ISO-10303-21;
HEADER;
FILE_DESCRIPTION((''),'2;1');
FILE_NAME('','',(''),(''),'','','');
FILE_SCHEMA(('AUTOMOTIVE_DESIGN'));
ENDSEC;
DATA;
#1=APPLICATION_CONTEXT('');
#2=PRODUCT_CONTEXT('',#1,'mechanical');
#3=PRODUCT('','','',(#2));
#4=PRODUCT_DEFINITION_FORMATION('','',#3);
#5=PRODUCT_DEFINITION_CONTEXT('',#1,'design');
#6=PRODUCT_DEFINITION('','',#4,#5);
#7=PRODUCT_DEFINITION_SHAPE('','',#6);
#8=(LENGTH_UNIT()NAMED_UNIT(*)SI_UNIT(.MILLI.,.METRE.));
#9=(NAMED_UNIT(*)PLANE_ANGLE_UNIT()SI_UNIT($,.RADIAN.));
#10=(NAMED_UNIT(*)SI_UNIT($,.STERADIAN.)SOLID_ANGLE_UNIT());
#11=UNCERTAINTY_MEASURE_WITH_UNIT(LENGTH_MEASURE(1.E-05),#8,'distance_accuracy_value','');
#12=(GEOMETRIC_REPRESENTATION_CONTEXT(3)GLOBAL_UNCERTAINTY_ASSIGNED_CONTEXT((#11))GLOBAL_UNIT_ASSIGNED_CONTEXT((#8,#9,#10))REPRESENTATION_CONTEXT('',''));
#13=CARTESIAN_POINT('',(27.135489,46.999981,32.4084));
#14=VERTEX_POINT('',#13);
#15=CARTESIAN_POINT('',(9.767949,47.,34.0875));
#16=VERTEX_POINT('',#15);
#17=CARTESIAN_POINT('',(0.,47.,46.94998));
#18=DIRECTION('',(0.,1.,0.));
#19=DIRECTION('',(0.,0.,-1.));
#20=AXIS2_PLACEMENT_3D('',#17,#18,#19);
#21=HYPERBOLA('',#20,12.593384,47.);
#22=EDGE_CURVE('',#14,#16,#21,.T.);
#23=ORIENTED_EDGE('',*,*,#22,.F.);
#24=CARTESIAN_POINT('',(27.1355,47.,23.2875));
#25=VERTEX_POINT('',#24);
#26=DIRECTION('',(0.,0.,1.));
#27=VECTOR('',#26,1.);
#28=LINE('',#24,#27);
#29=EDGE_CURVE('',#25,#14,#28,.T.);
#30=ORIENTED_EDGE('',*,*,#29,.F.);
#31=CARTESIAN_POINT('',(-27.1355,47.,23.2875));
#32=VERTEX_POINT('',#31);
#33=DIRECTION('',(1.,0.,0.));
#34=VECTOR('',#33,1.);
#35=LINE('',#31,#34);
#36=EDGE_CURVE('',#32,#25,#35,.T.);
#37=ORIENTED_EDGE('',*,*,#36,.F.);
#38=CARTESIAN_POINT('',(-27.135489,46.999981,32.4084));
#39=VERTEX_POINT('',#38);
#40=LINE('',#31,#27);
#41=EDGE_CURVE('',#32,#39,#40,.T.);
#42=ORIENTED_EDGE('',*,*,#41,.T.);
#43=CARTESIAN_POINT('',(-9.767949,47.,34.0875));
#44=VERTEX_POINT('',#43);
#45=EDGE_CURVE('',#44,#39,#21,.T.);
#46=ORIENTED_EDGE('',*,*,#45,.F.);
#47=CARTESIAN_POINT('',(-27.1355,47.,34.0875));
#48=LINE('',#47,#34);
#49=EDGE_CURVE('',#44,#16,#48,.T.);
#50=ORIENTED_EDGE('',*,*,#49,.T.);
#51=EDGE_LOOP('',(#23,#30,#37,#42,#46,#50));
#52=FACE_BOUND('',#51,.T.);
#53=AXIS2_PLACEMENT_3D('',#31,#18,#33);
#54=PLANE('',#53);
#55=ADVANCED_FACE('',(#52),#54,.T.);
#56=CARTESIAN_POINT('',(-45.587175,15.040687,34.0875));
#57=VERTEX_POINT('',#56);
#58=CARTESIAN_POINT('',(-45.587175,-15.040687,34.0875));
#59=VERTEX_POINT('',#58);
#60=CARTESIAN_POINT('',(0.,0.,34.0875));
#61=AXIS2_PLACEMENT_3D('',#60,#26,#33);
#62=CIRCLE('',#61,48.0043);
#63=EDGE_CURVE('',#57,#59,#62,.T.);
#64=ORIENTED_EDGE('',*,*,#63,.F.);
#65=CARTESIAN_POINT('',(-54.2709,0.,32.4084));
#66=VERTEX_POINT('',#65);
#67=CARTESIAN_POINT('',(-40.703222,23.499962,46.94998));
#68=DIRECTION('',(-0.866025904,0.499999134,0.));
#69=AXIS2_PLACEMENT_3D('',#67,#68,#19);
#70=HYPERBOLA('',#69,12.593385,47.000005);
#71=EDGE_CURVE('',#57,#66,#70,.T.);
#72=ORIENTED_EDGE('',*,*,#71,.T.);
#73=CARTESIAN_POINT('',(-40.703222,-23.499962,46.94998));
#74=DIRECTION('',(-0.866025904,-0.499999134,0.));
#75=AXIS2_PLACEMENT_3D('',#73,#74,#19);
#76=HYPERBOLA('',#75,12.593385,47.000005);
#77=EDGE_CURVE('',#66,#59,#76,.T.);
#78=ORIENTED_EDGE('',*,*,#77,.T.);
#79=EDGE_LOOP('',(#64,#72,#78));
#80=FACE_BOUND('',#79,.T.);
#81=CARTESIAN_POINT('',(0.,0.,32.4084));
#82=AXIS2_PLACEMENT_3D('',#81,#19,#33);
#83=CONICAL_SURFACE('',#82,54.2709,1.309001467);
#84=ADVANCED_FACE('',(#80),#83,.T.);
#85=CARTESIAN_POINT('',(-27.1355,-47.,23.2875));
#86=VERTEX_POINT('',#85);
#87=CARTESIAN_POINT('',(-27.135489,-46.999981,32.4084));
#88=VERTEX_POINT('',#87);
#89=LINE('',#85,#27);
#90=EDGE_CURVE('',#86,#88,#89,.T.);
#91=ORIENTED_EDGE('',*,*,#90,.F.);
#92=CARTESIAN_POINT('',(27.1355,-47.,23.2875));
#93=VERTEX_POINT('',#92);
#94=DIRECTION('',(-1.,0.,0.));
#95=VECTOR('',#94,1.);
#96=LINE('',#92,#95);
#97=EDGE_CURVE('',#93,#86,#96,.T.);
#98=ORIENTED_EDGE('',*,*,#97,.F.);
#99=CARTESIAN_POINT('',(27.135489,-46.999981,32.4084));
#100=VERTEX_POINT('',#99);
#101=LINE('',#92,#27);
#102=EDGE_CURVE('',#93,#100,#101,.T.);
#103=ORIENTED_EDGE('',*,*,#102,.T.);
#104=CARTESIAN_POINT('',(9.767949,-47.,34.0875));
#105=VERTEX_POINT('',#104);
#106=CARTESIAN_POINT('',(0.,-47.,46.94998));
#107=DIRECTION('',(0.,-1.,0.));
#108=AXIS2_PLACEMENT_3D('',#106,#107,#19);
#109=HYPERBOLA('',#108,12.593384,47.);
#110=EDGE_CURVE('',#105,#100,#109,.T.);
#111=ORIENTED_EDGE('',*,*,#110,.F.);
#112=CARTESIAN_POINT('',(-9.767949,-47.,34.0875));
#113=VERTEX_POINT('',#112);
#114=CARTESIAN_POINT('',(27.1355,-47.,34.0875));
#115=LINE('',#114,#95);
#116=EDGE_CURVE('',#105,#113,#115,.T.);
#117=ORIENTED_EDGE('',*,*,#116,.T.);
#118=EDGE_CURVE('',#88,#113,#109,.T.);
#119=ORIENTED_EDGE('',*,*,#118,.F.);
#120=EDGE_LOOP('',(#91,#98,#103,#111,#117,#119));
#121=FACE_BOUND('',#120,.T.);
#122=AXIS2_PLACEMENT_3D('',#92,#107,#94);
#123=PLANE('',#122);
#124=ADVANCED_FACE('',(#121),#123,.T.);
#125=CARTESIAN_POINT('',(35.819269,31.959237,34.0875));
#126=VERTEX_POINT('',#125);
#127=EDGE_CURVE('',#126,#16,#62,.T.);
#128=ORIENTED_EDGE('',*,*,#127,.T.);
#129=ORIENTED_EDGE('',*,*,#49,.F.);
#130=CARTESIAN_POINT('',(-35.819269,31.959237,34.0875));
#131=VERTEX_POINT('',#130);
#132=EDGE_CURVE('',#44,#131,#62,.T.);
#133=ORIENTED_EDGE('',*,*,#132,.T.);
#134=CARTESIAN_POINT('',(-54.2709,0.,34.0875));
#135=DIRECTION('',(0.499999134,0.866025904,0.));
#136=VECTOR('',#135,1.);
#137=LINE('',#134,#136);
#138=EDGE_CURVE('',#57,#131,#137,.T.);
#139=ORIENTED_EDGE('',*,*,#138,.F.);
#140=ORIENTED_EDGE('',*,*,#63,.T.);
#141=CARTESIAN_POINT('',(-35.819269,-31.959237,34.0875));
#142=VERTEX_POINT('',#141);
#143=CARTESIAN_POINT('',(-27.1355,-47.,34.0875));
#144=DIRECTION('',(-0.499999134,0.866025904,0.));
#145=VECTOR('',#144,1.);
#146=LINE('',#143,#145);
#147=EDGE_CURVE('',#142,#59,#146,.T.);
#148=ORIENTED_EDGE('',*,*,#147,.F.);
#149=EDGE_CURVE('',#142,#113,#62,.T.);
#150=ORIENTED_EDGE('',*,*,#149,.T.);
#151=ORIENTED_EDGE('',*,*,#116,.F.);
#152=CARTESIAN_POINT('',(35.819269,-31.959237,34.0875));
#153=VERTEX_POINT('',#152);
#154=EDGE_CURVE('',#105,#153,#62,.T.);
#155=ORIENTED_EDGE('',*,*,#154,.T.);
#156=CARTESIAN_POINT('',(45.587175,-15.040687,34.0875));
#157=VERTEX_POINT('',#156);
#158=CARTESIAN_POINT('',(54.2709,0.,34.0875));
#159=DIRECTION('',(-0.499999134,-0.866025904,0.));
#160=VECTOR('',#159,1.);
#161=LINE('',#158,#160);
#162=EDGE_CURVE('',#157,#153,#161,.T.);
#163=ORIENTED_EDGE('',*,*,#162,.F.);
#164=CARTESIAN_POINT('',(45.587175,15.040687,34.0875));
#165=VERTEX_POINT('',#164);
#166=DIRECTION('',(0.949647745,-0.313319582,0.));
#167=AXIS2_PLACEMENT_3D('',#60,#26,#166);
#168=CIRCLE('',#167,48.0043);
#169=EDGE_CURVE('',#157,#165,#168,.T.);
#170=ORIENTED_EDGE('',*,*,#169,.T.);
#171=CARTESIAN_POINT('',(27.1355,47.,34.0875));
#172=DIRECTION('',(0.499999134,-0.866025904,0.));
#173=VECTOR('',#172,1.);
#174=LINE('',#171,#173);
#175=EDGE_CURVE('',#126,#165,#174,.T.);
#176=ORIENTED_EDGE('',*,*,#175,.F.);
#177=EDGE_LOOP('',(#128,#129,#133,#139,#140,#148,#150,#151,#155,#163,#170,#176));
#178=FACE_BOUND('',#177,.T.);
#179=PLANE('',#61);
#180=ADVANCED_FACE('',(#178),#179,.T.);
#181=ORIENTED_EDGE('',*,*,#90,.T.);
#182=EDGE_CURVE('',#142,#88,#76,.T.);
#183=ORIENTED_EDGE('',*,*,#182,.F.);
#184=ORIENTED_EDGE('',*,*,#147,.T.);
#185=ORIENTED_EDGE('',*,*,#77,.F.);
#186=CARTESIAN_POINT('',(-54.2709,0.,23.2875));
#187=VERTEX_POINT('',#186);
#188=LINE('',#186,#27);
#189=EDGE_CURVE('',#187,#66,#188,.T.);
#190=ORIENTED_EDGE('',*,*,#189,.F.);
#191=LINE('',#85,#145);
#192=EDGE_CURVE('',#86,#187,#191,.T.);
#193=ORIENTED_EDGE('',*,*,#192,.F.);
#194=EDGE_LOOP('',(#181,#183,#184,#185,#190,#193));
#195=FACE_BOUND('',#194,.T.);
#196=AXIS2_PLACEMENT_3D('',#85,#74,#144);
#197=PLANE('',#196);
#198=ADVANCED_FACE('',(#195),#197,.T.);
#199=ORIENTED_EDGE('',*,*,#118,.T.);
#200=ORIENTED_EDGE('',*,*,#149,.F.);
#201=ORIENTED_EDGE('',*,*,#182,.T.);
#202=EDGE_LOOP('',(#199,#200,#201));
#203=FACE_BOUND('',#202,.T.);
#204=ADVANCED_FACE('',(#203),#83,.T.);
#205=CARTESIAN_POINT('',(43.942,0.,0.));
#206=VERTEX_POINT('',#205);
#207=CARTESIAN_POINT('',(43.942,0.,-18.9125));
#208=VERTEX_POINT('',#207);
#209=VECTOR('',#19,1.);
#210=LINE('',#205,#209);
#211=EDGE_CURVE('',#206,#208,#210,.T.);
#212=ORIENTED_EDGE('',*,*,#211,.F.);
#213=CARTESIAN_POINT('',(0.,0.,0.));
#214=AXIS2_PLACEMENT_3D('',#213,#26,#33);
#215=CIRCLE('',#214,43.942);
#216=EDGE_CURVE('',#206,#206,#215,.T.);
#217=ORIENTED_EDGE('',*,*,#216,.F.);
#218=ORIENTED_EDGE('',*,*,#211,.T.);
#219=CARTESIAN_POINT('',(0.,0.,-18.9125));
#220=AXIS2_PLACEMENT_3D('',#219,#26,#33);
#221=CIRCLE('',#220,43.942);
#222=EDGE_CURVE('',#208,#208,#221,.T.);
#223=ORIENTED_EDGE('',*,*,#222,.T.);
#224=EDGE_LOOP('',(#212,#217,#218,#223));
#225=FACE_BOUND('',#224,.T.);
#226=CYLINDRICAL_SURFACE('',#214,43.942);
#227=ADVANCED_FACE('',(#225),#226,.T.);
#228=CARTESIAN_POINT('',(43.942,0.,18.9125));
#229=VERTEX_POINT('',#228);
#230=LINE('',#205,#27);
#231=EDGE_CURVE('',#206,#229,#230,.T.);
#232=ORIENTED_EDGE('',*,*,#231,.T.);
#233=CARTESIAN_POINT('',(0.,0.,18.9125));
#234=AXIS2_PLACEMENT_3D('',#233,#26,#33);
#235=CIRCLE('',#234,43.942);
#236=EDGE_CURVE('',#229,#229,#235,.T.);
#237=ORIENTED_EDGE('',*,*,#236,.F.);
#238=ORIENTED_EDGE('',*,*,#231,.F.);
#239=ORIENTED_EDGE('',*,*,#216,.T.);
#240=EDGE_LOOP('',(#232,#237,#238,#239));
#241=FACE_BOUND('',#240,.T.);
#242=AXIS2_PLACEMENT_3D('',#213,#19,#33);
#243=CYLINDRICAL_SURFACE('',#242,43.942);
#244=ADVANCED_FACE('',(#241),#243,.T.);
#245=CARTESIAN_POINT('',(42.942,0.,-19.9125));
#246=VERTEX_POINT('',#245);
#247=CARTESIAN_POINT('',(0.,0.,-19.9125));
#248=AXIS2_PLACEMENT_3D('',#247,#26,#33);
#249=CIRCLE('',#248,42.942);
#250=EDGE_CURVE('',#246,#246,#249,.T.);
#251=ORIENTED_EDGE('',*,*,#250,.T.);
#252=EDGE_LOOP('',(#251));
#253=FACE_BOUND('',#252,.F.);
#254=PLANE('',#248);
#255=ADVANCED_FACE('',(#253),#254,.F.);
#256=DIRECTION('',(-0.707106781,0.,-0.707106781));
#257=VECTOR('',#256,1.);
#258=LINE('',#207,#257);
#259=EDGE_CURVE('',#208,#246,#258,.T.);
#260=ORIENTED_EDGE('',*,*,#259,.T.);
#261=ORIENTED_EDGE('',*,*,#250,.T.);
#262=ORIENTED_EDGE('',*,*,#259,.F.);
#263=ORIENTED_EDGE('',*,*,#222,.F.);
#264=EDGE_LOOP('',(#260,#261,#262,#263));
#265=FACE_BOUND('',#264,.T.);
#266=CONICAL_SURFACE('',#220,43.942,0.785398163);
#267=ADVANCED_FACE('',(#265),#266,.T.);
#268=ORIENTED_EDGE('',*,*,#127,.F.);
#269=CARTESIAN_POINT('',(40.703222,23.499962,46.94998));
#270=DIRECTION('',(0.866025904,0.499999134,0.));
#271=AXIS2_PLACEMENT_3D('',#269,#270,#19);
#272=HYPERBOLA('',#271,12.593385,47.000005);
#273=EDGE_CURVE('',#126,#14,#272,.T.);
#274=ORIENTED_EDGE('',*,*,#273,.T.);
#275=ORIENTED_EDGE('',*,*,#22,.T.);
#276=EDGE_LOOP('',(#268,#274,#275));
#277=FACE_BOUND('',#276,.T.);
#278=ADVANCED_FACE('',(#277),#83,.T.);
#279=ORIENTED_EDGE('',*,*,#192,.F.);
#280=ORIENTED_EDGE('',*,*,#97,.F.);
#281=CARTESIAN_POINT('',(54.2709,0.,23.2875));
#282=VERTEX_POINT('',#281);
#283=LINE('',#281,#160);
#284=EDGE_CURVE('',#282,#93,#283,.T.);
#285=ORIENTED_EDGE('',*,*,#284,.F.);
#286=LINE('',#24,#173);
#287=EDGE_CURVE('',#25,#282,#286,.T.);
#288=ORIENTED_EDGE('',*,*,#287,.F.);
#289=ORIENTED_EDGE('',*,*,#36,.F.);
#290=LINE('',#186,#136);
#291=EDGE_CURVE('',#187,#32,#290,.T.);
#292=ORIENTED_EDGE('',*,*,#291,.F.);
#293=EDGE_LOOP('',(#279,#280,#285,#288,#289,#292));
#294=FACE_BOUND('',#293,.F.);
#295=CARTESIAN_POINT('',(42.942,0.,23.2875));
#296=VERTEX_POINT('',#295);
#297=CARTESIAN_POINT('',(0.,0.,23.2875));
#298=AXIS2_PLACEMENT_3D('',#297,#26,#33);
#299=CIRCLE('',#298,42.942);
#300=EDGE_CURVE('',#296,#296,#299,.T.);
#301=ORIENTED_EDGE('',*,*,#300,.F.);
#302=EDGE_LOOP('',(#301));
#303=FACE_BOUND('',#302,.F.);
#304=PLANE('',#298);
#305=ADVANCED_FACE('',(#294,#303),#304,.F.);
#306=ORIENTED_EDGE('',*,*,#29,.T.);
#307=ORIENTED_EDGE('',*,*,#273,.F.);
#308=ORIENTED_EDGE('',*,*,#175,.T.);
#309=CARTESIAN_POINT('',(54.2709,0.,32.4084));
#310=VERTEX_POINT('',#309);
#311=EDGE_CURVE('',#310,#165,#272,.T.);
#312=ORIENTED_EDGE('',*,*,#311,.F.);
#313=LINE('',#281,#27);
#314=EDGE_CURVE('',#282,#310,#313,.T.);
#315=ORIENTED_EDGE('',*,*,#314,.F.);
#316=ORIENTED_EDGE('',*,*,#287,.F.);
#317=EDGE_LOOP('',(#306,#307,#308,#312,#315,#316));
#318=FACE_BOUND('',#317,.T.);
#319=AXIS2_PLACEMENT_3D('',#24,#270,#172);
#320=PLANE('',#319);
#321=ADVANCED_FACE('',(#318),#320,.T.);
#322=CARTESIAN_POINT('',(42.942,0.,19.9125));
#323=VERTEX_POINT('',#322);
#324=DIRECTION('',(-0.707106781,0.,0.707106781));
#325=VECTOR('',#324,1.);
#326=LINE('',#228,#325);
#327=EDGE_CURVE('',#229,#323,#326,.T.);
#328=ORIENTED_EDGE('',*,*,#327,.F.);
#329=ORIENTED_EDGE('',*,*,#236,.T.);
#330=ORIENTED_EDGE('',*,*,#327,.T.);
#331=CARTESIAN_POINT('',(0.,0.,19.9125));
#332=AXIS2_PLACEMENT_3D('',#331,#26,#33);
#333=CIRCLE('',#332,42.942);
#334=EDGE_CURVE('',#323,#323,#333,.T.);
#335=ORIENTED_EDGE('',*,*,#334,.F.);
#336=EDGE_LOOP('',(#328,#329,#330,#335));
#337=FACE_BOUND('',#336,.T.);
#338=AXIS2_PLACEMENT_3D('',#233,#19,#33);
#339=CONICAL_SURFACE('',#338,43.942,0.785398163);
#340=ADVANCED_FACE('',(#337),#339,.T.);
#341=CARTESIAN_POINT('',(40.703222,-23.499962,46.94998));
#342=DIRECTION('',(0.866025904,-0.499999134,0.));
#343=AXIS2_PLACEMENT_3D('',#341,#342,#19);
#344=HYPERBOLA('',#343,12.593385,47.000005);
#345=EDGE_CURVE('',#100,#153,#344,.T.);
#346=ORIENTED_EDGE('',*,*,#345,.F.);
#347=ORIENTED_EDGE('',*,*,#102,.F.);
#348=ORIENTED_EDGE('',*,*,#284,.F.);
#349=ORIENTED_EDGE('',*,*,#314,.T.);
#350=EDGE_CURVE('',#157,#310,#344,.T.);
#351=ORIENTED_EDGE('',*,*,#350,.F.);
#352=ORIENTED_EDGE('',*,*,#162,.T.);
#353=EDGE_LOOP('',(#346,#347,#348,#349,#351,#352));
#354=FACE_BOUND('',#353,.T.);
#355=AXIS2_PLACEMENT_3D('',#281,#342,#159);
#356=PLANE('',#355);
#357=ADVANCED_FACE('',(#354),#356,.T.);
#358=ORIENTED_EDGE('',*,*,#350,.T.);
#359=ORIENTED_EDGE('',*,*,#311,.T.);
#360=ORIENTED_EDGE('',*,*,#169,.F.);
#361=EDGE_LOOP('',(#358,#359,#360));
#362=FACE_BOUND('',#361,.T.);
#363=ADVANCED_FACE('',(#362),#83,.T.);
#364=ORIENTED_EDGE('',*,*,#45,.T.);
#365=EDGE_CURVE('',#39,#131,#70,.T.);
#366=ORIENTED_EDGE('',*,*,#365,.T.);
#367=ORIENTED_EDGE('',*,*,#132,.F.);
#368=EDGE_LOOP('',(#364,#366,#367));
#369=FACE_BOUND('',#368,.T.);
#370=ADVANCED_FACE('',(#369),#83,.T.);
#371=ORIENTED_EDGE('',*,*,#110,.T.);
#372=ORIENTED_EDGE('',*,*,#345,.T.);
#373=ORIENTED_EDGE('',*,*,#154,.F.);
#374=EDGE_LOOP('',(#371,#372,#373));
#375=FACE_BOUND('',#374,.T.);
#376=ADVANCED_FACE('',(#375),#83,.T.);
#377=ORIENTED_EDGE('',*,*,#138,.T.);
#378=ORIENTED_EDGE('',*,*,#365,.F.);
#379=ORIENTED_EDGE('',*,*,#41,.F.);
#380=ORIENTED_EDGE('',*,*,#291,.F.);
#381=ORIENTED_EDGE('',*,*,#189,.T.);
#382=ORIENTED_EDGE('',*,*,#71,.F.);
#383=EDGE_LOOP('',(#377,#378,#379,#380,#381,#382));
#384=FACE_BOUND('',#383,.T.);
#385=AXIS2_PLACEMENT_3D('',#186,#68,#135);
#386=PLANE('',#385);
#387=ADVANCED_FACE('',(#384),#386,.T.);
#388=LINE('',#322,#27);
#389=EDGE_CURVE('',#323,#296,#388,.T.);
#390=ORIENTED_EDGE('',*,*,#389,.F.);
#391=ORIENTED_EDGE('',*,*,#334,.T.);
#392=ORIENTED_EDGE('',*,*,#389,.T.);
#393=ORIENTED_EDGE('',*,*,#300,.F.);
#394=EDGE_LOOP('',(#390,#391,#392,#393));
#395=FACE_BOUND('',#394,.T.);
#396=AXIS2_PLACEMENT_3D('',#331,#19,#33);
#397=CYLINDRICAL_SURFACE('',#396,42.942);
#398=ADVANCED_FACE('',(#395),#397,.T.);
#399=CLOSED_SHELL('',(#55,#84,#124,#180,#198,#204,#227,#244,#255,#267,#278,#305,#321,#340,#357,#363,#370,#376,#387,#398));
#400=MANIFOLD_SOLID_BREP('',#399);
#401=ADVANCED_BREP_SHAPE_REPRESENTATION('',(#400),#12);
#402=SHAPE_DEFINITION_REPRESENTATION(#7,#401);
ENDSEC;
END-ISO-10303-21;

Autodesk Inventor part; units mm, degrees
ref_plane "YZ Plane" through (0, 0, 0) normal (1, 0, 0) x (0, 1, 0)
ref_plane "XZ Plane" through (0, 0, 0) normal (0, 1, 0) x (-1, 0, 0)
ref_plane "XY Plane" through (0, 0, 0) normal (0, 0, 1) x (1, 0, 0)
sketch "Szkic7" plane through (0, 0, 0) normal (0, 0, 1) x (1, 0, 0)
  circle A0 centre (0, 0) radius 43.942
  dimension "d35" = 87.884
extrude "Wyciągnięcie proste2" add sketch "Szkic7" along normal mid plane 39.825
chamfer "Faza2" distance 1 angle 45 1 edges at (-43.942, 0, 19.9125)
sketch "Szkic9" plane through (0, 0, 19.9125) normal (0, 0, 1) x (1, 0, 0)
  circle A0 centre (0, 0) radius 42.942 projected
extrude "Wyciągnięcie proste3" add sketch "Szkic9" along normal blind 3.375
sketch "Szkic10" plane through (0, 0, 23.2875) normal (0, 0, 1) x (1, 0, 0)
  line L0 (-27.1355, 47) -> (27.1355, 47)
  line L1 (27.1355, 47) -> (54.2709, 0)
  line L2 (54.2709, 0) -> (27.1355, -47)
  line L3 (27.1355, -47) -> (-27.1355, -47)
  line L4 (-27.1355, -47) -> (-54.2709, 0)
  line L5 (-54.2709, 0) -> (-27.1355, 47)
  line L6 (0, 61.5188) -> (0, -61.5188) construction
  line L7 (-61.5188, 0) -> (61.5188, 0) construction
  point P0 (0, 0)
  point P1 (0, 0)
  point P2 (0, 47)
  dimension "d44" = 94
extrude "Wyciągnięcie proste4" add sketch "Szkic10" along normal blind 10.8
sketch "Szkic12" plane through (0, 0, 0) normal (0, 1, 0) x (-1, 0, 0)
  line L0 (0, -2.1463) -> (0, 12.8775) construction
  line L1 (-27.1355, 23.2875) -> (-27.1355, 34.0875) construction
  line L2 (-54.2709, 34.0875) -> (-27.1355, 34.0875) construction
  line L3 (-54.2709, 23.2875) -> (-54.2709, 34.0875) projected
  line L4 (-54.2709, 32.4084) -> (-48.0043, 34.0875)
  line L5 (-54.2709, 34.0875) -> (-27.1355, 34.0875) projected
  line L6 (-54.2709, 23.2875) -> (-27.1355, 23.2875) projected
  point P0 (0, 0)
  dimension "d50" = 15
  dimension "d51" = 6.2667
revolve "Obrót2" cut sketch "Szkic12" angle 360 about axis through (0, 0, -10) along (0, 0, 1)
thread "Gwint3" size "G87.884x2.309" designation "G 3" class "A" standard "ISO Pipe Threads" full length
chamfer "Faza3" distance 1 angle 45 1 edges at (-43.942, 0, -19.9125)
equation "\"d35\" = OD"
equation "\"d36\" = 0.7375 * L"
equation "\"d42\" = 0.0625 * L"
equation "\"d44\" = SW"
equation "\"d45\" = 0.2 * L"
equation "\"d51\" = 0.0666667 * SW"
equation "\"SzerokośćGięciaPodcięcia\" = Grubość"
equation "\"RozmiarPodcięciaNarożnika\" = 4 * Grubość"
equation "\"PromieńPrzejścia\" = PromieńGięcia"
equation "\"Rozmiar_promienia_Jacobiego\" = PromieńGięcia"
equation "\"Wielk_odstępu\" = Grubość"
equation "\"d2\" = PromieńGięcia"
equation "\"d23\" = PromieńGięcia"
equation "\"OD\" = 87.884"
equation "\"SW\" = 94"
equation "\"L\" = 54"
equation "\"Grubość\" = 1.5"
equation "\"PromieńGięcia\" = 3"
properties part number "Korek sześciokątny BSP 3'' L=54" material "304"
